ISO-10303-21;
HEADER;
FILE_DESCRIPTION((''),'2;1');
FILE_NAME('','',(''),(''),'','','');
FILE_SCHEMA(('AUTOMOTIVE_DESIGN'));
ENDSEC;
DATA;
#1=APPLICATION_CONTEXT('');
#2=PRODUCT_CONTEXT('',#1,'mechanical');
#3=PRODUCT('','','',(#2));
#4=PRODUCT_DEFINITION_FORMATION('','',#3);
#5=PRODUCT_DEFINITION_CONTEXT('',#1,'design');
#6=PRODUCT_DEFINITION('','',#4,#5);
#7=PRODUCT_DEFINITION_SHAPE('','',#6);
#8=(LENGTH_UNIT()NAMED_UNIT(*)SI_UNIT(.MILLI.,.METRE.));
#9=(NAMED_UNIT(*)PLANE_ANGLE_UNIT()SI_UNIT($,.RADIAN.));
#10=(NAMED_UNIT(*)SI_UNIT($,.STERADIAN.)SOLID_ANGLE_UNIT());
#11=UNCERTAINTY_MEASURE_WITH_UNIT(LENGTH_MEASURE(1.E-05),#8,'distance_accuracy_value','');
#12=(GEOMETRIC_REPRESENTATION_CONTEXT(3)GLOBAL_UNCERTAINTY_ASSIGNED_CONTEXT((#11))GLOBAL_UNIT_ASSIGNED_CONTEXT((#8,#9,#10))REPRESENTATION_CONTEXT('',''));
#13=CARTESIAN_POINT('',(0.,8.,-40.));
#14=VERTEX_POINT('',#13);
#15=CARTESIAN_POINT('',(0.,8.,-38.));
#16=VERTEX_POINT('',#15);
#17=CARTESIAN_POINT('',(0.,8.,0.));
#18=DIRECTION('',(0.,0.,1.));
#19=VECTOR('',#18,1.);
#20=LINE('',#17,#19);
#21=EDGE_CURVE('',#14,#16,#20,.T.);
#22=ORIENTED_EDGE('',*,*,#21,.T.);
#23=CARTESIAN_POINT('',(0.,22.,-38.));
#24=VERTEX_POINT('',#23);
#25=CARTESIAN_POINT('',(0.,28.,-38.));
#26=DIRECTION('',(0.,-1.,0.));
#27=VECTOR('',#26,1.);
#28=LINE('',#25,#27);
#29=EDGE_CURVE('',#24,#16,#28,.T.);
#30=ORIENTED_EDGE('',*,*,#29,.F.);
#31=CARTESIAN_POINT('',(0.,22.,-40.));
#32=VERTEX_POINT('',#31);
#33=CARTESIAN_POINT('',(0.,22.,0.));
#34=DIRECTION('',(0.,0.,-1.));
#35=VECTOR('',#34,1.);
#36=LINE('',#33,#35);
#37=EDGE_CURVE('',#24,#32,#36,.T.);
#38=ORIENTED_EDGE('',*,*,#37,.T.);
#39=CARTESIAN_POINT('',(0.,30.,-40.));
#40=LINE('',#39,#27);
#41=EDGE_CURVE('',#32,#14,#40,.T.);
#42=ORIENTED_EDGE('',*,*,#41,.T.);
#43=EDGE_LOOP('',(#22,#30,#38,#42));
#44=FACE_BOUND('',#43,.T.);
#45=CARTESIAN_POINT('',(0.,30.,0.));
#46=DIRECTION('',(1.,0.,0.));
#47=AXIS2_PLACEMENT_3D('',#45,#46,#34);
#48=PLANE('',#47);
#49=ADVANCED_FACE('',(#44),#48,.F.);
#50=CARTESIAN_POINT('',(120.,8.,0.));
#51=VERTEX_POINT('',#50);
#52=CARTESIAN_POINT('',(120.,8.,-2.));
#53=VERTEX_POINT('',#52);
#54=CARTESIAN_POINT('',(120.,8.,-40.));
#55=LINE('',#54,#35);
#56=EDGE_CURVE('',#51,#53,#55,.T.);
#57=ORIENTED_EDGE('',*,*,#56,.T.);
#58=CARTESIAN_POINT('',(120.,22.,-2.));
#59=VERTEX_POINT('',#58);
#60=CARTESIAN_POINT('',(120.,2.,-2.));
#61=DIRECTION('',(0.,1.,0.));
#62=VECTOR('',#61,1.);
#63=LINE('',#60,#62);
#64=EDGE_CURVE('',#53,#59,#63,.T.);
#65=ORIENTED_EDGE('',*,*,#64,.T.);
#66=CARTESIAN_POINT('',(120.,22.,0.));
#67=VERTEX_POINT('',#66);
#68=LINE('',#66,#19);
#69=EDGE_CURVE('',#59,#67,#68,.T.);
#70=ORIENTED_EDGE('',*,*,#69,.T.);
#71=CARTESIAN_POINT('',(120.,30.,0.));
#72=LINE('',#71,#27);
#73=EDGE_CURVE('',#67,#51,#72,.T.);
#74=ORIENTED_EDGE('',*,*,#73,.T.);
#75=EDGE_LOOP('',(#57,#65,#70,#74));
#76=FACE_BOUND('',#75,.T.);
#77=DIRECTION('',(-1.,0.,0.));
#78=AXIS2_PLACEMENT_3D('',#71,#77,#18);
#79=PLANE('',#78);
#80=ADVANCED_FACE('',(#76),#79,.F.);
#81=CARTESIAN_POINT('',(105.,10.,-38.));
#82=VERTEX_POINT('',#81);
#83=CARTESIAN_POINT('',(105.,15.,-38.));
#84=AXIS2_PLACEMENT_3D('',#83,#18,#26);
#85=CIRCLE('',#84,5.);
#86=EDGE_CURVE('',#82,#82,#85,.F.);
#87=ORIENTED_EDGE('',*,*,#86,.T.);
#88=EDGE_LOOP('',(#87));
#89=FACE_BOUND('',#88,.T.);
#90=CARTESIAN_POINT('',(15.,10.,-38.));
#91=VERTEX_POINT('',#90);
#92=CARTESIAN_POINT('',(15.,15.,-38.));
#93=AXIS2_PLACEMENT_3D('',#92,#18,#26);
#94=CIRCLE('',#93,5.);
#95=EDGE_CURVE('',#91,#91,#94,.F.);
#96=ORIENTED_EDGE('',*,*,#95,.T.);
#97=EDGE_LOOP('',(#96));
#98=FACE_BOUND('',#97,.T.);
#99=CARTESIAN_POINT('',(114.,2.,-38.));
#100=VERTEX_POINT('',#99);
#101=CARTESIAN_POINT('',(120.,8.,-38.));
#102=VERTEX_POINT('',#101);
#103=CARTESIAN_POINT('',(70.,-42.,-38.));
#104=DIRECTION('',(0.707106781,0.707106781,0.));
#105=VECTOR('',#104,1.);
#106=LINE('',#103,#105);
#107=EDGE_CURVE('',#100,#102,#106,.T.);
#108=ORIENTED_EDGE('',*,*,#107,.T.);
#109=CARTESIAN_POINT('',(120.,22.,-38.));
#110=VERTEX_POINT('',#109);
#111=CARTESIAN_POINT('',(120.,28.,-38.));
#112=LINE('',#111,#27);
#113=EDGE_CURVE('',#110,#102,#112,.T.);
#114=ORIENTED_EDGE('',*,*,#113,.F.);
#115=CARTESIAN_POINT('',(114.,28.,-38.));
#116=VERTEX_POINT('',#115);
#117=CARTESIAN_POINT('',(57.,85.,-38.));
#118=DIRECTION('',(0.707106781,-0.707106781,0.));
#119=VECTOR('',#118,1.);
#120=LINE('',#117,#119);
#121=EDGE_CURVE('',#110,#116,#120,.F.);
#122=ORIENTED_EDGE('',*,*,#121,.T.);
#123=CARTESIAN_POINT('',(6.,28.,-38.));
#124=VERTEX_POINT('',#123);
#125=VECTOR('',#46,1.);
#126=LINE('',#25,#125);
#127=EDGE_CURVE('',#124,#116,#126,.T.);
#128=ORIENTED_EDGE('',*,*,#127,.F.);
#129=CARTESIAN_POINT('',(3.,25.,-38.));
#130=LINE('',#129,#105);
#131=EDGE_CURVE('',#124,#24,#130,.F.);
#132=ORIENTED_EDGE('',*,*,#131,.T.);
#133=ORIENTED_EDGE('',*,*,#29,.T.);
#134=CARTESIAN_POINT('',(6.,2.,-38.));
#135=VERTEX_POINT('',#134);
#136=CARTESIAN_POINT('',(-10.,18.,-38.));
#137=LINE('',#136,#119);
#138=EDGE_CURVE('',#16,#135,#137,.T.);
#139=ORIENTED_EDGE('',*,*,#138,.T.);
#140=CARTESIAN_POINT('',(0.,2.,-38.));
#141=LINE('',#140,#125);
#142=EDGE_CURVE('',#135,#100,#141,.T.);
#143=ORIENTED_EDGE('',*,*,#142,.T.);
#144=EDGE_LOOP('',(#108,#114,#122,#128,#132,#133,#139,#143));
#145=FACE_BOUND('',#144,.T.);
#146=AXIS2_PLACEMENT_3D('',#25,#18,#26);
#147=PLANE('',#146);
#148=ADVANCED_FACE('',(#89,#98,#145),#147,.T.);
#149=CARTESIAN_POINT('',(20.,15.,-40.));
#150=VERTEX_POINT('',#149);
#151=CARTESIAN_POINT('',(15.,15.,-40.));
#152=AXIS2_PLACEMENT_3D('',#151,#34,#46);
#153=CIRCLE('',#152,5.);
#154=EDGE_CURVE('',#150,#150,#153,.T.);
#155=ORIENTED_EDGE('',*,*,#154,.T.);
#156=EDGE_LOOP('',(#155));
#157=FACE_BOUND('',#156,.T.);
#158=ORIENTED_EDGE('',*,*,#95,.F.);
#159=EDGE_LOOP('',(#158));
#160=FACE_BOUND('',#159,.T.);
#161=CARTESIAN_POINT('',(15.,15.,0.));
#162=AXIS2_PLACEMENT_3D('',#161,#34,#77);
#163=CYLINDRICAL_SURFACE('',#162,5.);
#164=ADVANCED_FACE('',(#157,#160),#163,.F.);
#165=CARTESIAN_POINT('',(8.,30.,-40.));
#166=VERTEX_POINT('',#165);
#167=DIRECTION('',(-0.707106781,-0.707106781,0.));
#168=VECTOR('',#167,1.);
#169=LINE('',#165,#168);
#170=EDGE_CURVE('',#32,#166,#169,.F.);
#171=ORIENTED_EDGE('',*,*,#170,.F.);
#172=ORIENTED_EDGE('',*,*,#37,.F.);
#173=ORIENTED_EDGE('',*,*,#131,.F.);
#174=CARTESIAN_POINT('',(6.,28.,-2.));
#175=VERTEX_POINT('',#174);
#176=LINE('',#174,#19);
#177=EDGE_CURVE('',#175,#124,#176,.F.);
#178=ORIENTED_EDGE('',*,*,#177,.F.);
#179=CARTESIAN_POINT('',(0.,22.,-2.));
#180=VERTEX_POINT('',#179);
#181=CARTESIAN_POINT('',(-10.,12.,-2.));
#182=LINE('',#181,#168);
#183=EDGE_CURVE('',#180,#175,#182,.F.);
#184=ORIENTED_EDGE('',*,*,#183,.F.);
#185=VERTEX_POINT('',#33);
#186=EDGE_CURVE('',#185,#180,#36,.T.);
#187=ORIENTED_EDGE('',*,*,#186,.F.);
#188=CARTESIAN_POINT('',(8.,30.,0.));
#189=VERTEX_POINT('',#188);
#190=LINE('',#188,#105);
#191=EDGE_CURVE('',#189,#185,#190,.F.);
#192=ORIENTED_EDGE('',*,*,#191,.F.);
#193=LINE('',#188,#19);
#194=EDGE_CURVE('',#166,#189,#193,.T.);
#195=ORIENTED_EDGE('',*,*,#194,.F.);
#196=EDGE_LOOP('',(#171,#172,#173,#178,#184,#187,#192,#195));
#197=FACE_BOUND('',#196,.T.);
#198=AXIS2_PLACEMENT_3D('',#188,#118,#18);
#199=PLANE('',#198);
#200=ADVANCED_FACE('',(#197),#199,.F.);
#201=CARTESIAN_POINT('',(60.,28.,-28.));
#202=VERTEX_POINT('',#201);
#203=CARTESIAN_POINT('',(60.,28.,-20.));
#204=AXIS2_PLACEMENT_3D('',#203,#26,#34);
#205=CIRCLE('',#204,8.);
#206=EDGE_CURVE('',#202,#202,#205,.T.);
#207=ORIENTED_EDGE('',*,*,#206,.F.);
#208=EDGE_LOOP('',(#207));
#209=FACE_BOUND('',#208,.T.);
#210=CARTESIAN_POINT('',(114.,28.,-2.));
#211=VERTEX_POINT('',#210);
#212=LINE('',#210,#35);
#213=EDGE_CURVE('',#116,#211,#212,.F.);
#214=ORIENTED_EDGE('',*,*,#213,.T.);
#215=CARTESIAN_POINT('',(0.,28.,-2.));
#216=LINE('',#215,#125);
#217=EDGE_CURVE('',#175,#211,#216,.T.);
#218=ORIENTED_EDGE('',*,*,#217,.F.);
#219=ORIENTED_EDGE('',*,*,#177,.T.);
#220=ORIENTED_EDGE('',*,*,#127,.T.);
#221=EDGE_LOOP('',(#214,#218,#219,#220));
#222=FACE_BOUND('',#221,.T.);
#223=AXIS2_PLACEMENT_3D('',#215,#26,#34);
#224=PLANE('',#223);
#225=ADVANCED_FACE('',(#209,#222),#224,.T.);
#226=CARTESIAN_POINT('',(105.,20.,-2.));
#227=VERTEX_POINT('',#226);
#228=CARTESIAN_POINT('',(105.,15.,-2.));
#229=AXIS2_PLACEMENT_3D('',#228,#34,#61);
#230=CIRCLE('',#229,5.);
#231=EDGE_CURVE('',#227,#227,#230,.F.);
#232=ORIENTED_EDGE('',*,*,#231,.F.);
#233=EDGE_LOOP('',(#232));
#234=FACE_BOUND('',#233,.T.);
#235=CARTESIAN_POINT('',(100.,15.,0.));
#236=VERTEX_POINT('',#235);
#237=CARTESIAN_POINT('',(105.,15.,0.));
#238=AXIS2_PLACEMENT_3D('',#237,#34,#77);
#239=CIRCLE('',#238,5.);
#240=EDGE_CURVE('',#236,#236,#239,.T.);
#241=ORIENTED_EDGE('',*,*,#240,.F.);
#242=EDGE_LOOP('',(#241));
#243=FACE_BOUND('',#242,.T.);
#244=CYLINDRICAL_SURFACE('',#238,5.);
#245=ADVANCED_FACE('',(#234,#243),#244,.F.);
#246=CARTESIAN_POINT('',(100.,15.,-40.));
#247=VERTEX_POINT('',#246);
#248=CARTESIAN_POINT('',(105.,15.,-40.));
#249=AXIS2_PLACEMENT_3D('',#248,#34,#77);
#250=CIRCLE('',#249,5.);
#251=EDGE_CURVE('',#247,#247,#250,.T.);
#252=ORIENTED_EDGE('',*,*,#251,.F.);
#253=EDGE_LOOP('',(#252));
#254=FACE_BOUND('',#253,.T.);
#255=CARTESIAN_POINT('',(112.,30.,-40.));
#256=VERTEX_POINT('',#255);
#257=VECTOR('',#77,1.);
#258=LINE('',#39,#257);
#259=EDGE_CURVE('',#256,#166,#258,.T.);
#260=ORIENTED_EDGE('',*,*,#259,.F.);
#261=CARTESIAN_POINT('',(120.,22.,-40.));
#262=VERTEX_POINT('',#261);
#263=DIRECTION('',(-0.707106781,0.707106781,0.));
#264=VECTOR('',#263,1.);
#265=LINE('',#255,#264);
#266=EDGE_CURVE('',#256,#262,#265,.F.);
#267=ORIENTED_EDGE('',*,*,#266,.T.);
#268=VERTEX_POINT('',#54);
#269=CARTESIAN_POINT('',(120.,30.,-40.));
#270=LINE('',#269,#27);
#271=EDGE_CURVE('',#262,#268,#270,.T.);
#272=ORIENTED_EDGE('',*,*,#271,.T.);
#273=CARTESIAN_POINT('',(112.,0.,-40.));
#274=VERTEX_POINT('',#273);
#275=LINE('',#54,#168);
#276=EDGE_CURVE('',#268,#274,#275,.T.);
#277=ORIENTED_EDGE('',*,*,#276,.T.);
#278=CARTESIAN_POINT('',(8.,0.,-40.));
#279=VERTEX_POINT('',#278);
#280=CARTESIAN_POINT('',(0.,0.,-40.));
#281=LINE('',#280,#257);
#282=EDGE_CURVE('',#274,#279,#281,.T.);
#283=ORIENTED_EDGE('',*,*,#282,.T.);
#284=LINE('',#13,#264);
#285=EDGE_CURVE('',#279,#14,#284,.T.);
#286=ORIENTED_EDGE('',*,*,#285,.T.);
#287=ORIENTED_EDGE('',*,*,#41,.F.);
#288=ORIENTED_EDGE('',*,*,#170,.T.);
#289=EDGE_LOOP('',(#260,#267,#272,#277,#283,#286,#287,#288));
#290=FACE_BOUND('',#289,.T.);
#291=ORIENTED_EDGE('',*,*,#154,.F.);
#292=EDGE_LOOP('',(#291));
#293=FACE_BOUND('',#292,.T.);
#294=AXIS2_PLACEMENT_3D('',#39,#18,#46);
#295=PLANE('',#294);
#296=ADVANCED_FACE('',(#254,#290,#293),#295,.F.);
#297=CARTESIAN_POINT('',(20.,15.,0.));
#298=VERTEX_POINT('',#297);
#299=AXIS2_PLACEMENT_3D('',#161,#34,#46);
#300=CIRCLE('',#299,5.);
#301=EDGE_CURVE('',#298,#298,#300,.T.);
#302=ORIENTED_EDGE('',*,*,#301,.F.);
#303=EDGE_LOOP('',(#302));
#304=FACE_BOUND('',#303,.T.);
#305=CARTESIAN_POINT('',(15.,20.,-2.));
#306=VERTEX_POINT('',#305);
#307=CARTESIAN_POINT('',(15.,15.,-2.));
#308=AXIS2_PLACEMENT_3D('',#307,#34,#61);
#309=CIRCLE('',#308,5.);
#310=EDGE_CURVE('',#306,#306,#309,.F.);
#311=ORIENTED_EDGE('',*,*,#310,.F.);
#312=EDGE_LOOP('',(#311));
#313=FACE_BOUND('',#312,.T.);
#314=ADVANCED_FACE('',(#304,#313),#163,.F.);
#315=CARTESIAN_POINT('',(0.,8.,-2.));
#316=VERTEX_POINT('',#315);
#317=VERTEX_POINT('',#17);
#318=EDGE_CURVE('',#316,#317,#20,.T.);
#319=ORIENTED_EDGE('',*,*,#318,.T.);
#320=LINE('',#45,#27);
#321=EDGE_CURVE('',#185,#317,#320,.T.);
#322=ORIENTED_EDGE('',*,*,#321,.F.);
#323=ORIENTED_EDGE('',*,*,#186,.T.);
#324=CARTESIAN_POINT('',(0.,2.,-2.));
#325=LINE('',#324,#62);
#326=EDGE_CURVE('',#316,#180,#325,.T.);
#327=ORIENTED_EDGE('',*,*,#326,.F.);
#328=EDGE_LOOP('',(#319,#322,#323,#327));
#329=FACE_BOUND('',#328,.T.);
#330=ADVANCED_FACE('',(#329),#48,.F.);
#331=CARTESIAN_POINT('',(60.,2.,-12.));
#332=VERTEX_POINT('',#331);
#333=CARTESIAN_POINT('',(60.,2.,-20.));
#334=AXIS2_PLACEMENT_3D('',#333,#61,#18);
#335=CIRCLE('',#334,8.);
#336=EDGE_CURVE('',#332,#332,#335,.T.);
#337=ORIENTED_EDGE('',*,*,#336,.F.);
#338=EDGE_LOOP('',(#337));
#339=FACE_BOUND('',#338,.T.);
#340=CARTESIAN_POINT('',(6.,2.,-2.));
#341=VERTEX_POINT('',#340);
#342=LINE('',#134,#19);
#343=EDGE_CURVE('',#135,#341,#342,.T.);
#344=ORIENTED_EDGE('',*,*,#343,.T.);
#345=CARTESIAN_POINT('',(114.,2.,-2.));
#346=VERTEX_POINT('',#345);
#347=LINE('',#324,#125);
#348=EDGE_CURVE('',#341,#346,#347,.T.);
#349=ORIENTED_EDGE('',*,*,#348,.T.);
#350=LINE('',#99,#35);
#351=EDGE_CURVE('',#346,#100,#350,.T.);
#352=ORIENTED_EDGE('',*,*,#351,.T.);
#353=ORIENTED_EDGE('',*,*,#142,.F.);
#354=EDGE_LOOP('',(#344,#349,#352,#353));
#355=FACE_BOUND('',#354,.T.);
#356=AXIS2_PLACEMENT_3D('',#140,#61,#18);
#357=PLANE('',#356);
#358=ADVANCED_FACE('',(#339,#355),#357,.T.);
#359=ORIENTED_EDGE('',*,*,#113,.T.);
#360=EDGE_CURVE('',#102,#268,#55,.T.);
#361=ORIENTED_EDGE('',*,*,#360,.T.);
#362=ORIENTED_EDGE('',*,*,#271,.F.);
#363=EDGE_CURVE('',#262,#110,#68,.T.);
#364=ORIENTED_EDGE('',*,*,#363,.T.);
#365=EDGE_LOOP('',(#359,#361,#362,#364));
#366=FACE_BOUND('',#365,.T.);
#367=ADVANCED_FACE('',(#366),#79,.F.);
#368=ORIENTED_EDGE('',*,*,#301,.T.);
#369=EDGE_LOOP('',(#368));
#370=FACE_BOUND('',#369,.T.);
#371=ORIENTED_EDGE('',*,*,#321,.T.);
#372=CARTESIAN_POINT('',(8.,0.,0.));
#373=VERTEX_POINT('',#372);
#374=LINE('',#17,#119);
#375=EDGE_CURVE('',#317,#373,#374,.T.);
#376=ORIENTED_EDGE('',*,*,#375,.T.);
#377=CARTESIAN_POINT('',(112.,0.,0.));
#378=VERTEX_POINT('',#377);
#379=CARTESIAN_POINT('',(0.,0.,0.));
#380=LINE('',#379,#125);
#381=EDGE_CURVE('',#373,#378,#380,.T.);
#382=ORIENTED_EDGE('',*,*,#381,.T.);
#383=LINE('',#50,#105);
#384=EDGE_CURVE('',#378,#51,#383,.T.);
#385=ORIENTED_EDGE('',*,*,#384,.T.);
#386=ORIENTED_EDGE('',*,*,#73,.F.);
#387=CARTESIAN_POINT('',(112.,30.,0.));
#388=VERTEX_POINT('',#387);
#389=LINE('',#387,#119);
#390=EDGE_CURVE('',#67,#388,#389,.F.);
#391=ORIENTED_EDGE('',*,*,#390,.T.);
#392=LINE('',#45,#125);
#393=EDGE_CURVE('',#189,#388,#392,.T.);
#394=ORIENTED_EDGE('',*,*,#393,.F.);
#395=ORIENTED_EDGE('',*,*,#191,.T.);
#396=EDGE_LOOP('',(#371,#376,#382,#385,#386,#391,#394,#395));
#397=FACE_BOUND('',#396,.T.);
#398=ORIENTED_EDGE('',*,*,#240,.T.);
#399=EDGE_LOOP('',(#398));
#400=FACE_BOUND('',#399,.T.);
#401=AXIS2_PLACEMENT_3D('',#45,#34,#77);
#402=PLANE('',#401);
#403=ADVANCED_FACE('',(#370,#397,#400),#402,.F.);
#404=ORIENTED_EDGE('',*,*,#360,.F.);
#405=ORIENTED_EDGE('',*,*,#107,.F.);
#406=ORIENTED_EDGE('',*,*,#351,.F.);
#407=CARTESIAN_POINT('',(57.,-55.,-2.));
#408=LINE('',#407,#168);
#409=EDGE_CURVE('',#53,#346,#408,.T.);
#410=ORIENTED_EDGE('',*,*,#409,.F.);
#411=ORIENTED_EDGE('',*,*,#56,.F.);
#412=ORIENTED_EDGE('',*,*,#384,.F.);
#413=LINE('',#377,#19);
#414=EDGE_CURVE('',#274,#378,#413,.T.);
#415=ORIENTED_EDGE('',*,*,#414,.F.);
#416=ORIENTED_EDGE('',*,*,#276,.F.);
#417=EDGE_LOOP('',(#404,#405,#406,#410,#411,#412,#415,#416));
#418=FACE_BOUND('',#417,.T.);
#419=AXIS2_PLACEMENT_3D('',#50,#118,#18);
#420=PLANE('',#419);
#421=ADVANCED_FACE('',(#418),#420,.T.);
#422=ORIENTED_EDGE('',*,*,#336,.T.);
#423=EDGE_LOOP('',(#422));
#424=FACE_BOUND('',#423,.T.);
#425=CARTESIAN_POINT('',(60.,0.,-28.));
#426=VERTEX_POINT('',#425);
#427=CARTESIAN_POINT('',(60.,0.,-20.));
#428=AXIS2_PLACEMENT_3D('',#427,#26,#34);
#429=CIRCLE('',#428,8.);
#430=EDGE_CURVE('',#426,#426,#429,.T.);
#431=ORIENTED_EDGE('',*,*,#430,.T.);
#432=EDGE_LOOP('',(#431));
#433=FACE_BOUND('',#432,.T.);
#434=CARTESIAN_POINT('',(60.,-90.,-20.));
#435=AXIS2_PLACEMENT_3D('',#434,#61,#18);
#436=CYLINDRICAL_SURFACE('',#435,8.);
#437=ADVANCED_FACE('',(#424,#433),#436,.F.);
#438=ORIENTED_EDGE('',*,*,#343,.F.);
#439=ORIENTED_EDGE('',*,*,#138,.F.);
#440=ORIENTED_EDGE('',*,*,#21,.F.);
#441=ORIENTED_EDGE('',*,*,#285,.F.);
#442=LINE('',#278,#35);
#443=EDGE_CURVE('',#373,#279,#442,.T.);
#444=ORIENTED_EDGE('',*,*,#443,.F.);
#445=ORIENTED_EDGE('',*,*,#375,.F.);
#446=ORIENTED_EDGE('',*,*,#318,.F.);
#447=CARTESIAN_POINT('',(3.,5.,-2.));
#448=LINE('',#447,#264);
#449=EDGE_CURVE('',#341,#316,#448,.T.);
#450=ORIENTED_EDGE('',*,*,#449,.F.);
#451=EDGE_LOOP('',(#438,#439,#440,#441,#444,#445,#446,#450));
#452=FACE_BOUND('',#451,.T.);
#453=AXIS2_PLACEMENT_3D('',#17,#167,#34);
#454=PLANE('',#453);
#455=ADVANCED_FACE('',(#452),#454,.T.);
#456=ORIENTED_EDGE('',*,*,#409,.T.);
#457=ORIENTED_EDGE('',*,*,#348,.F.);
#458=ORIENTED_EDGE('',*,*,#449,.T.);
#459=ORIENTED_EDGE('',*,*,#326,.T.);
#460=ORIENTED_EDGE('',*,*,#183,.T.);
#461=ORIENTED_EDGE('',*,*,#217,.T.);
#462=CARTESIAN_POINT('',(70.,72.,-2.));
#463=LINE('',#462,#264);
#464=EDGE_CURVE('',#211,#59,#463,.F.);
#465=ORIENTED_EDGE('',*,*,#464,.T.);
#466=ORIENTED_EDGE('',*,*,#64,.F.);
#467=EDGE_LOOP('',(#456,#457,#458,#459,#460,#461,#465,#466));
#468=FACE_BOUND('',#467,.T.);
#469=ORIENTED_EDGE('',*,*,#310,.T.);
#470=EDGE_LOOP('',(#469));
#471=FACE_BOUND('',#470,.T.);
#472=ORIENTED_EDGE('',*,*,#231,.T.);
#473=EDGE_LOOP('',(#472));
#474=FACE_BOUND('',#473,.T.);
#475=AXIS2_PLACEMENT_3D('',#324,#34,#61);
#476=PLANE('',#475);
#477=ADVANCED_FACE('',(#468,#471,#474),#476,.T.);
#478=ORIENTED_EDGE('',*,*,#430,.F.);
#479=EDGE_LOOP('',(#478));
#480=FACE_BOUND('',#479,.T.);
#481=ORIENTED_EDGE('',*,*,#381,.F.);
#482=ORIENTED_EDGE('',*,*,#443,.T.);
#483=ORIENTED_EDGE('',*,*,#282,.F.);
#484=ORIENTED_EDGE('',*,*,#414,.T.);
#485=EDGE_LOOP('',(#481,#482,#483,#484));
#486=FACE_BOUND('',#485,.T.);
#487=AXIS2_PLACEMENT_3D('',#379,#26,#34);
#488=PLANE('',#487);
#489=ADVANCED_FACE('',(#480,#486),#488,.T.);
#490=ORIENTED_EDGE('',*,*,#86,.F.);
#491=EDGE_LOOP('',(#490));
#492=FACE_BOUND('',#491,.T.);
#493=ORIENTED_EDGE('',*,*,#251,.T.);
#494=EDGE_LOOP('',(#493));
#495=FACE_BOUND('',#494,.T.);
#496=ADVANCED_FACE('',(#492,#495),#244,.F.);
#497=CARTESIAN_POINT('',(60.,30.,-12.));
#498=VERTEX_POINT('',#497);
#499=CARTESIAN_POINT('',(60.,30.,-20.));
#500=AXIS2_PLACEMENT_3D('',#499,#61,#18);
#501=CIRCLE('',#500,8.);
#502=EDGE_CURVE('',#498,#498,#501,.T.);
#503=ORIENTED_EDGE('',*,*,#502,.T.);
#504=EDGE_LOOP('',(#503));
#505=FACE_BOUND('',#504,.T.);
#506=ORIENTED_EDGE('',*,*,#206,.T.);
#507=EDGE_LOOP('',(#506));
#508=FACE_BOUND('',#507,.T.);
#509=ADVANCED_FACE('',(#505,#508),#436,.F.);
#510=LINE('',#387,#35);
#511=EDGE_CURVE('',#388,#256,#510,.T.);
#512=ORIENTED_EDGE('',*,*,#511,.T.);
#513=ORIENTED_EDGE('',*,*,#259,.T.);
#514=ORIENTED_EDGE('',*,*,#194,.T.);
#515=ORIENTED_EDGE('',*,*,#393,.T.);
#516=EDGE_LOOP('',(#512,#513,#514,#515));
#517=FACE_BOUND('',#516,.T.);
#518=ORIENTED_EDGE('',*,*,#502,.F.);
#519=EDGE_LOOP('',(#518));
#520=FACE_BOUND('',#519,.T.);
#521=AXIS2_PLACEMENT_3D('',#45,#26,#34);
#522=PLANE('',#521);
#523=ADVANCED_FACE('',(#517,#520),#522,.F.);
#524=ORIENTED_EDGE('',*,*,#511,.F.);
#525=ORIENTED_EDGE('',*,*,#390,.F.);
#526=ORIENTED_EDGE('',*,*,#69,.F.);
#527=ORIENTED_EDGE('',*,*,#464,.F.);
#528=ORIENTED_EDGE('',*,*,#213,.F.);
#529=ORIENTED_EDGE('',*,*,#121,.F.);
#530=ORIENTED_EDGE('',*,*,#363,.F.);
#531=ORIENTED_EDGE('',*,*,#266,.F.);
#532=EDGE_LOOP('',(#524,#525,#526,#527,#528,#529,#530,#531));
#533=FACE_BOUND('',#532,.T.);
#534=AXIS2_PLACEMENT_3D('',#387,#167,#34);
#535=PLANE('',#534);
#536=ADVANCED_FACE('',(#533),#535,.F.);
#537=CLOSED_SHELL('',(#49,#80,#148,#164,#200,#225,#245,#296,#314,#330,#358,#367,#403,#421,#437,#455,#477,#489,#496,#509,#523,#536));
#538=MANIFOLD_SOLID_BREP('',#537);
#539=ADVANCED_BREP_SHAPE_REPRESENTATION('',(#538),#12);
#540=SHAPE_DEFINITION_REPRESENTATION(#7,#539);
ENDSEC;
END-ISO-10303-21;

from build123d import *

# Parameters (mm, degrees)
SKETCH1_W           = 120
SKETCH1_H           = 40
BOSS_EXTRUDE3_DEPTH = 30
SKETCH3_R           = 5
CUT_EXTRUDE2_DEPTH  = 131
CUT_EXTRUDE3_DEPTH  = 120
SKETCH6_R           = 8
CUT_EXTRUDE4_DEPTH  = 120
CHAMFER2_SIZE       = 8


with BuildPart() as part:
    # Sketch1 → Boss-Extrude3 (new body)
    with BuildSketch(Plane(origin=(0, 0, 0), x_dir=(1, 0, 0), z_dir=(0, 1, 0))):
        with Locations((60, 20)):
            Rectangle(SKETCH1_W, SKETCH1_H)
    extrude(amount=BOSS_EXTRUDE3_DEPTH)

    # Sketch3 → Cut-Extrude2 (cut, through all)
    with BuildSketch(Plane(origin=(0, 0, -40), x_dir=(-1, 0, 0), z_dir=(0, 0, -1))):
        with Locations((-105, 15)):
            Circle(SKETCH3_R)
        with Locations(Location((-15, 15, 0), (0, 0, 180))):
            Circle(SKETCH3_R)
    extrude(amount=-CUT_EXTRUDE2_DEPTH, mode=Mode.SUBTRACT)

    # 3DSketch1 → Cut-Extrude3 (cut)
    with BuildSketch(Plane(origin=(0, 28, -2), x_dir=(0, -0.5854905538443583, -0.8106792283998812), z_dir=(-1, 0, 0))):
        Polygon((0, 0), (29.184452222, -21.077659938), (44.407206622, 0), (15.2227544, 21.077659938), align=None)
    extrude(amount=-CUT_EXTRUDE3_DEPTH, mode=Mode.SUBTRACT)

    # Sketch6 → Cut-Extrude4 (cut)
    with BuildSketch(Plane(origin=(0, 30, 0), x_dir=(1, 0, 0), z_dir=(0, 1, 0))):
        with Locations(Location((60, 20, 0), (0, 0, 270))):
            Circle(SKETCH6_R)
    extrude(amount=-CUT_EXTRUDE4_DEPTH, mode=Mode.SUBTRACT)

    # Chamfer2
    # the kernel refuses this chamfer: 8 mm, written as the material it takes off along each edge
    with BuildSketch(Plane(origin=(0, 0, -60.573463904), x_dir=(-0.027495876610586372, 0.9996219169112968, 0), z_dir=(0, 0, 1)), Plane(origin=(120, 30, 20.573463904), x_dir=(-0.9996219169112968, 0.02749587661058651, 0), z_dir=(0, 0, -1))) as chamfer2_piece_1:
        Polygon((CHAMFER2_SIZE * 0.999621916911, -CHAMFER2_SIZE * 0.0274958766106), (-CHAMFER2_SIZE * 0.0274958766106, -CHAMFER2_SIZE * 0.999621916911), (0, 0), align=None)
    extrude(amount=81.146927807, mode=Mode.SUBTRACT)
    with BuildSketch(Plane(origin=(0, 30, -60.573463904), x_dir=(-0.027495876610586365, -0.9996219169112968, 0), z_dir=(0, 0, 1)), Plane(origin=(120, 0, 20.573463904), x_dir=(-0.9996219169112968, -0.02749587661058639, 0), z_dir=(0, 0, -1))) as chamfer2_piece_2:
        Polygon((CHAMFER2_SIZE * 0.999621916911, CHAMFER2_SIZE * 0.0274958766106), (-CHAMFER2_SIZE * 0.0274958766106, CHAMFER2_SIZE * 0.999621916911), (0, 0), align=None)
    extrude(amount=81.146927807, mode=Mode.SUBTRACT)


solid = part.part
